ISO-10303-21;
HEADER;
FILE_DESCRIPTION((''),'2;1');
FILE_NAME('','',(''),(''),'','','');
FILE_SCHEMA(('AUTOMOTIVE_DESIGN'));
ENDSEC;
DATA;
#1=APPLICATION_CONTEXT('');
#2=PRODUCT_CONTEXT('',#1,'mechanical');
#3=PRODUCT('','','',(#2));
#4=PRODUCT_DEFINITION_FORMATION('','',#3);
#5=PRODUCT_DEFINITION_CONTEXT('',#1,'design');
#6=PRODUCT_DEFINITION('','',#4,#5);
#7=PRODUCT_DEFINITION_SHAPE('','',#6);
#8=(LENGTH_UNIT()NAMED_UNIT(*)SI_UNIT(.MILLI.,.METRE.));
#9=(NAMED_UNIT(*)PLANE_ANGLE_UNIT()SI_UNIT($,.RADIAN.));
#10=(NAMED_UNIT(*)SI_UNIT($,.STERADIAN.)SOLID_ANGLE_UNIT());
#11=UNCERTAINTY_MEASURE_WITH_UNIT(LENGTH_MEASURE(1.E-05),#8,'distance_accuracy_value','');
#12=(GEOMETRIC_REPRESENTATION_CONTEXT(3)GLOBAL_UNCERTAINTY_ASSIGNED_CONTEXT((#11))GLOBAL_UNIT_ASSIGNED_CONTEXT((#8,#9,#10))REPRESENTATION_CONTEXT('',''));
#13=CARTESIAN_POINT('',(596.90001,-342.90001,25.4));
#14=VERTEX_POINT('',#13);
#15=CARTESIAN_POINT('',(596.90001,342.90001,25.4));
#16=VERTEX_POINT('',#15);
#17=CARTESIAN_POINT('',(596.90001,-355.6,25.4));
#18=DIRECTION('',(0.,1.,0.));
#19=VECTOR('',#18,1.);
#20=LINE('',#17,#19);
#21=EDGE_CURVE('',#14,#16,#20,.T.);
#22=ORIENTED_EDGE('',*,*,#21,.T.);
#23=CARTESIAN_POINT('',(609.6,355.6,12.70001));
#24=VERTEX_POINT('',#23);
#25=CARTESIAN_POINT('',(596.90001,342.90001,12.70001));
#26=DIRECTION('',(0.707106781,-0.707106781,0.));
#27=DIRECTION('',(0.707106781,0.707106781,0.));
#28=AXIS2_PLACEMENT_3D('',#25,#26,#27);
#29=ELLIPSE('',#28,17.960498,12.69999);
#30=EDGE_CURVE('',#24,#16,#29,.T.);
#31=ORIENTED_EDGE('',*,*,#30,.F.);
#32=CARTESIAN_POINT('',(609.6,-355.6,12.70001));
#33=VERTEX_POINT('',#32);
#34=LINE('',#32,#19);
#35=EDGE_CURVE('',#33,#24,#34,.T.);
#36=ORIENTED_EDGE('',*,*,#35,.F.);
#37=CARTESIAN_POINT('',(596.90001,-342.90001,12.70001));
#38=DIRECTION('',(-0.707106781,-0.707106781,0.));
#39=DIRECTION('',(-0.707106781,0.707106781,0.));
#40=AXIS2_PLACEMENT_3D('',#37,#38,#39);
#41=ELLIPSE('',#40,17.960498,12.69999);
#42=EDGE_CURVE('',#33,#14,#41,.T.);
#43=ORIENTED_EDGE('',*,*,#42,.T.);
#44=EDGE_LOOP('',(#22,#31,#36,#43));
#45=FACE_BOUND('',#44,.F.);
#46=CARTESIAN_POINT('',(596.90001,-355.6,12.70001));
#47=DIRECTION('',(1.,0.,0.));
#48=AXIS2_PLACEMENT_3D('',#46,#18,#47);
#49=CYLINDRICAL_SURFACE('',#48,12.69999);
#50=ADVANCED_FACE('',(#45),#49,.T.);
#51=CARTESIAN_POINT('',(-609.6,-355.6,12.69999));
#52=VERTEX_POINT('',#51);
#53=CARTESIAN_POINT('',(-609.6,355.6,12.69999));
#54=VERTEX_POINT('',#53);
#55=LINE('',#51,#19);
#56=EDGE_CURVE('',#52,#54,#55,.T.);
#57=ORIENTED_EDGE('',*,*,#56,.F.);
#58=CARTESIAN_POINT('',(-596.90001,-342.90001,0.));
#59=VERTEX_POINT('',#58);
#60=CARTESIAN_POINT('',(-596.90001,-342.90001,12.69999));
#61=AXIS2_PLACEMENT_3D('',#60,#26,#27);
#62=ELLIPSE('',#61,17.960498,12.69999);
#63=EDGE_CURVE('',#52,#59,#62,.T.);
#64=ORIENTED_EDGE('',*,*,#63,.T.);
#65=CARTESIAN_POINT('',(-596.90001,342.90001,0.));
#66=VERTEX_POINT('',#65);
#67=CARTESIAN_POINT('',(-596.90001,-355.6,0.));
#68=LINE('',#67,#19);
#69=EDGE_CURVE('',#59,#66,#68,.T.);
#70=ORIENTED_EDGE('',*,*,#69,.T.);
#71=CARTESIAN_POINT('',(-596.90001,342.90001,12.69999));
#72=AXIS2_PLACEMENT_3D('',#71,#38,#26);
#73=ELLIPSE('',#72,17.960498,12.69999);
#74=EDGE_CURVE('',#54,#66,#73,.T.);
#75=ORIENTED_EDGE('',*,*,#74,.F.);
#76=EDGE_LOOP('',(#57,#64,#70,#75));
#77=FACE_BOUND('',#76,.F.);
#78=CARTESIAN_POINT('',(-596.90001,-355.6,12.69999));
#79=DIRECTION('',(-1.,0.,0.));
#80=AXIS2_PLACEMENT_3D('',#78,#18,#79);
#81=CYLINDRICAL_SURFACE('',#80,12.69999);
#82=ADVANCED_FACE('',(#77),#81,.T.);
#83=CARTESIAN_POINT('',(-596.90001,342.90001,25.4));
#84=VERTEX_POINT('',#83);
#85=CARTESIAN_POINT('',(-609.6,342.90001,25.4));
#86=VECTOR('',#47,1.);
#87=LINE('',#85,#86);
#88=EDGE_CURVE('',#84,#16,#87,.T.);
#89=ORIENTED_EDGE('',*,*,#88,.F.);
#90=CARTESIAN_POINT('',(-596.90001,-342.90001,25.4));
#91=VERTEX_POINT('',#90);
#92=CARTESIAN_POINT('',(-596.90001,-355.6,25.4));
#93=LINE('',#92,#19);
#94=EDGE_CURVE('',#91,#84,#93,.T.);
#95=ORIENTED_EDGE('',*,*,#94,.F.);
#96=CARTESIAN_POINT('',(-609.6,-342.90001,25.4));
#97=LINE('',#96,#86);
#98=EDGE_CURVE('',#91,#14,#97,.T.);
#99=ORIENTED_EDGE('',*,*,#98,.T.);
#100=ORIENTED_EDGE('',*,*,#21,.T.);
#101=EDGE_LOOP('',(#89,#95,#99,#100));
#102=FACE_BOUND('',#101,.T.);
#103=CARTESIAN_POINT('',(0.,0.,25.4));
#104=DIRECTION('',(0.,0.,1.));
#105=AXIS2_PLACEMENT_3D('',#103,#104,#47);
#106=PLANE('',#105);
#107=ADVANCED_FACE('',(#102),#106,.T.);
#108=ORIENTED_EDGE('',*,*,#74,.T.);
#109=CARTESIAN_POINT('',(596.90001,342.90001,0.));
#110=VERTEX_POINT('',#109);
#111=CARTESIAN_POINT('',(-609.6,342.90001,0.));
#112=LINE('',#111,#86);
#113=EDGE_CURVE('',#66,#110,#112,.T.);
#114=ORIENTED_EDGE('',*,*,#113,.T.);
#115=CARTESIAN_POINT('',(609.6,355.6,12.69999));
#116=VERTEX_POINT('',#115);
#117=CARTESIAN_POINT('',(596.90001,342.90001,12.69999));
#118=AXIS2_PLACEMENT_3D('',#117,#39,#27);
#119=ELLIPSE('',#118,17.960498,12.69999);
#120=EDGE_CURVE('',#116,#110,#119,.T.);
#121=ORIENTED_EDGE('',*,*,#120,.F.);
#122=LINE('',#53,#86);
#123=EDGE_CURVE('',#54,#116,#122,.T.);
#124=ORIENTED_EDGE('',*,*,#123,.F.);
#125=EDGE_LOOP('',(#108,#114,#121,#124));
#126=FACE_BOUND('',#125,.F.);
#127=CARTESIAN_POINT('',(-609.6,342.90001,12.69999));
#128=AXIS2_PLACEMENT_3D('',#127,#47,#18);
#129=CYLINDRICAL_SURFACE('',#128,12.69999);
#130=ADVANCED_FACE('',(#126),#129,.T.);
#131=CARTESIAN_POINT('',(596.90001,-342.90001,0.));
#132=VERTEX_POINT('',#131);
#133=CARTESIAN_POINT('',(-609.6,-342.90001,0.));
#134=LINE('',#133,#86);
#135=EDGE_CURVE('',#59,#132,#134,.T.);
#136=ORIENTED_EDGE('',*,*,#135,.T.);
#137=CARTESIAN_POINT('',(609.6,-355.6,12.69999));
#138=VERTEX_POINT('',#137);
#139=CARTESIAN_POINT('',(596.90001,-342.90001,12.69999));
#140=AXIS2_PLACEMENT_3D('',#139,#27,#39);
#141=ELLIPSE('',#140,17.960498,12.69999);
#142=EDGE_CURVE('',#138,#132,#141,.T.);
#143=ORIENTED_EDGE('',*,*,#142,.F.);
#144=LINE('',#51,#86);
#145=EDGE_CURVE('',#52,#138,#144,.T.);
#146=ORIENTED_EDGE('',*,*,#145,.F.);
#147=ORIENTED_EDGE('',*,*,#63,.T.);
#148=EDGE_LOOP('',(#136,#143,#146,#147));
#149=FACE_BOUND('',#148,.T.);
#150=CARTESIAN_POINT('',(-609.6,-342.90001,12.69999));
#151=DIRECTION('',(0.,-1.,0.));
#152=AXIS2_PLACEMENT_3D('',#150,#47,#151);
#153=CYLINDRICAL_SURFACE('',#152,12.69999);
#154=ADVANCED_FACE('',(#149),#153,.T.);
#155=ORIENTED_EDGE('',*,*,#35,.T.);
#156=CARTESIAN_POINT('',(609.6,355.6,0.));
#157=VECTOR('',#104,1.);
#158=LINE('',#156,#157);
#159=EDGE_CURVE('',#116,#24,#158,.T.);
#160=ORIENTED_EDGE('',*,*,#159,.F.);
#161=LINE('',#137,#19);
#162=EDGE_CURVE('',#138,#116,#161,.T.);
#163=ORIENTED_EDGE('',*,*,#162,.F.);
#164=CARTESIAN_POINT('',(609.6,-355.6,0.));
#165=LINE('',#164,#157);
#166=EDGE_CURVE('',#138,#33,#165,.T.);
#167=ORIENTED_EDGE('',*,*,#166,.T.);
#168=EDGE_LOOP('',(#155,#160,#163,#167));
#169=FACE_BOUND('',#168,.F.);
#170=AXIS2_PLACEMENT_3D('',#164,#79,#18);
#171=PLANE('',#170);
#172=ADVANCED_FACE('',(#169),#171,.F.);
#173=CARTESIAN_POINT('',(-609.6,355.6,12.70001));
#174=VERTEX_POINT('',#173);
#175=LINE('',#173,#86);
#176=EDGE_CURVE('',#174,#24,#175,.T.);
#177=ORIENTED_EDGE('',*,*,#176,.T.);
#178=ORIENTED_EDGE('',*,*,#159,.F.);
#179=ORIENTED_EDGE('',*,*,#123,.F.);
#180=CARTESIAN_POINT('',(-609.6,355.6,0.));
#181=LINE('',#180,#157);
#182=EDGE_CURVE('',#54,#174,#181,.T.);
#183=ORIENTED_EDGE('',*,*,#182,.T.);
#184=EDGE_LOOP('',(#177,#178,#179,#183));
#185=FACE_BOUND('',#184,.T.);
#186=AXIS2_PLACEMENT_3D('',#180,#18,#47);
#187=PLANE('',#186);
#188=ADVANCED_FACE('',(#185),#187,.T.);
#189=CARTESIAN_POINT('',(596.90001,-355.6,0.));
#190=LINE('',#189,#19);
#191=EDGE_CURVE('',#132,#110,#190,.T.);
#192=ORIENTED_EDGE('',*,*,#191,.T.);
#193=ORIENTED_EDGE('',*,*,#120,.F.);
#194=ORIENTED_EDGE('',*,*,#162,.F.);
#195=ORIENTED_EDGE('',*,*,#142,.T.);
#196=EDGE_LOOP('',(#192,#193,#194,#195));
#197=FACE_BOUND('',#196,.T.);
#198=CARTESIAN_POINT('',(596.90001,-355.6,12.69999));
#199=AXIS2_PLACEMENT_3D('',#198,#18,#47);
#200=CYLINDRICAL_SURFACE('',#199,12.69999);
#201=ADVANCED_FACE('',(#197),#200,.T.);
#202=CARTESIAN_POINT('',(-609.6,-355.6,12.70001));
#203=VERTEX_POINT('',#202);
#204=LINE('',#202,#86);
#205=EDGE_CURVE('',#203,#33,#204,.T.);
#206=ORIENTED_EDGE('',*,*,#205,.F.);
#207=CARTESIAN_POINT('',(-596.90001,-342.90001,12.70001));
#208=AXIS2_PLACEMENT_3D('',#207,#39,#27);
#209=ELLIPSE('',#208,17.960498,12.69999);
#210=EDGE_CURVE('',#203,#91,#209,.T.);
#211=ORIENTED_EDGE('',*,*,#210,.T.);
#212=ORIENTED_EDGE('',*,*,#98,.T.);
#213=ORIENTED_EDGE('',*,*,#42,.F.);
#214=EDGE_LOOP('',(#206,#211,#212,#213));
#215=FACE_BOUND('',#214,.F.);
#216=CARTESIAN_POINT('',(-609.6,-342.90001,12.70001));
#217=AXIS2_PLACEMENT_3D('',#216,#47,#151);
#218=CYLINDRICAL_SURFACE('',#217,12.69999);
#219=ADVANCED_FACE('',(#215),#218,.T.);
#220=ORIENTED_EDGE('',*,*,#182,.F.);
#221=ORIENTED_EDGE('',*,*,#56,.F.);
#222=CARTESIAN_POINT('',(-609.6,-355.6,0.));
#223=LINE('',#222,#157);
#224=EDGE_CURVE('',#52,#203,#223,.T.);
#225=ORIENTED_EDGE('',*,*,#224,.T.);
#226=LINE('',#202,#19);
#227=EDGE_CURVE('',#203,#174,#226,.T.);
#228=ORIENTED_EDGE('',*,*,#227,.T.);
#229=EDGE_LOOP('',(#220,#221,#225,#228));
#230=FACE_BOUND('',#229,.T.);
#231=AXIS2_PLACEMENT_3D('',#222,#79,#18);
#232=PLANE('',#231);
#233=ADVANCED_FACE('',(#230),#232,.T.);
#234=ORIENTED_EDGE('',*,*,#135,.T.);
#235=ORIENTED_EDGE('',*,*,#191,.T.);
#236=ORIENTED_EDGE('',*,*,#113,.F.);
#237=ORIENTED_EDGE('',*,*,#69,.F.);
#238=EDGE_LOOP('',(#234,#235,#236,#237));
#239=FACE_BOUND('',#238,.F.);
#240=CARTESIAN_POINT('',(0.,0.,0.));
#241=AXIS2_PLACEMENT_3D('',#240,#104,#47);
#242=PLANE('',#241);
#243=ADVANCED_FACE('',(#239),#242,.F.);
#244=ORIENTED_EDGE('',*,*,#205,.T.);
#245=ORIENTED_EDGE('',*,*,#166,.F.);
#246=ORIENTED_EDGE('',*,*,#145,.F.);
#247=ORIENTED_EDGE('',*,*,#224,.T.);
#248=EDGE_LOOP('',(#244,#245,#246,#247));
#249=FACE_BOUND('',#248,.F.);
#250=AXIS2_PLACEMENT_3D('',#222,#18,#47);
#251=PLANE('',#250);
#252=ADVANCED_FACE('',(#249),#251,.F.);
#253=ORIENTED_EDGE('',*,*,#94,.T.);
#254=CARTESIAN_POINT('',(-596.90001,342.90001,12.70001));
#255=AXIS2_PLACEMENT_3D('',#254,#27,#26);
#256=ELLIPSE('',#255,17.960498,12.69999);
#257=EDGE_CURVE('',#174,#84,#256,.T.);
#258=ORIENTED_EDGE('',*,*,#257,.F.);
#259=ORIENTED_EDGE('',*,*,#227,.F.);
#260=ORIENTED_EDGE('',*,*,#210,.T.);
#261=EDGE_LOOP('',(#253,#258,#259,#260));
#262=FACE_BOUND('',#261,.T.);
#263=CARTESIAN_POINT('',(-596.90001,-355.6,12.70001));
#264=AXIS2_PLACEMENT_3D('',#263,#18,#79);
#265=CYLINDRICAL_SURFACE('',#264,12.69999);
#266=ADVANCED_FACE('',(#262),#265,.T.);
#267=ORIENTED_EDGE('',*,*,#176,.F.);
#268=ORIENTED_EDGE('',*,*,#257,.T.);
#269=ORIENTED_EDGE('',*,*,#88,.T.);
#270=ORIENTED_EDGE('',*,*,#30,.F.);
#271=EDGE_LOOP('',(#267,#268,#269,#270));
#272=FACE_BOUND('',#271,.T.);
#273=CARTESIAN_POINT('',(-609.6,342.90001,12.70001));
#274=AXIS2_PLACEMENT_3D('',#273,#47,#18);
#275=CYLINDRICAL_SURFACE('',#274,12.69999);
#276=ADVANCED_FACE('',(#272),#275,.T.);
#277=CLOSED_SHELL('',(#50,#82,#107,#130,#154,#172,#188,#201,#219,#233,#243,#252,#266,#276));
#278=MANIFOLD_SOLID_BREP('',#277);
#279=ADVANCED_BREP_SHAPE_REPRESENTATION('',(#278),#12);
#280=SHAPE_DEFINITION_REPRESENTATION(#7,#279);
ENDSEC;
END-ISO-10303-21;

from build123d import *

# Parameters (mm, degrees)
F0_W     = 1219.2
F0_H     = 711.2
F1_DEPTH = 25.4
F2_R     = 12.69999


# Not quite as in the source:
# - a fillet or chamfer is up to 0.001 mm smaller than in the source, because OpenCascade refuses the exact size


with BuildPart() as f1:
    # F0 (on Top) → F1 (new body)
    with BuildSketch(Plane.XY):
        Rectangle(F0_W, F0_H)
    extrude(amount=F1_DEPTH)

    # F2 (radius 12.7 in the source; OpenCascade refuses exactly that, so slightly less here)
    f2_edges = [f1.edges().sort_by_distance(p)[0] for p in [
        (609.6, 0, 25.4),
        (0, 355.6, 25.4),
        (-609.6, 0, 25.4),
        (0, -355.6, 25.4),
        (609.6, 0, 0),
        (0, 355.6, 0),
        (-609.6, 0, 0),
        (0, -355.6, 0),
    ]]
    fillet(f2_edges, radius=F2_R)


solid = f1.part
